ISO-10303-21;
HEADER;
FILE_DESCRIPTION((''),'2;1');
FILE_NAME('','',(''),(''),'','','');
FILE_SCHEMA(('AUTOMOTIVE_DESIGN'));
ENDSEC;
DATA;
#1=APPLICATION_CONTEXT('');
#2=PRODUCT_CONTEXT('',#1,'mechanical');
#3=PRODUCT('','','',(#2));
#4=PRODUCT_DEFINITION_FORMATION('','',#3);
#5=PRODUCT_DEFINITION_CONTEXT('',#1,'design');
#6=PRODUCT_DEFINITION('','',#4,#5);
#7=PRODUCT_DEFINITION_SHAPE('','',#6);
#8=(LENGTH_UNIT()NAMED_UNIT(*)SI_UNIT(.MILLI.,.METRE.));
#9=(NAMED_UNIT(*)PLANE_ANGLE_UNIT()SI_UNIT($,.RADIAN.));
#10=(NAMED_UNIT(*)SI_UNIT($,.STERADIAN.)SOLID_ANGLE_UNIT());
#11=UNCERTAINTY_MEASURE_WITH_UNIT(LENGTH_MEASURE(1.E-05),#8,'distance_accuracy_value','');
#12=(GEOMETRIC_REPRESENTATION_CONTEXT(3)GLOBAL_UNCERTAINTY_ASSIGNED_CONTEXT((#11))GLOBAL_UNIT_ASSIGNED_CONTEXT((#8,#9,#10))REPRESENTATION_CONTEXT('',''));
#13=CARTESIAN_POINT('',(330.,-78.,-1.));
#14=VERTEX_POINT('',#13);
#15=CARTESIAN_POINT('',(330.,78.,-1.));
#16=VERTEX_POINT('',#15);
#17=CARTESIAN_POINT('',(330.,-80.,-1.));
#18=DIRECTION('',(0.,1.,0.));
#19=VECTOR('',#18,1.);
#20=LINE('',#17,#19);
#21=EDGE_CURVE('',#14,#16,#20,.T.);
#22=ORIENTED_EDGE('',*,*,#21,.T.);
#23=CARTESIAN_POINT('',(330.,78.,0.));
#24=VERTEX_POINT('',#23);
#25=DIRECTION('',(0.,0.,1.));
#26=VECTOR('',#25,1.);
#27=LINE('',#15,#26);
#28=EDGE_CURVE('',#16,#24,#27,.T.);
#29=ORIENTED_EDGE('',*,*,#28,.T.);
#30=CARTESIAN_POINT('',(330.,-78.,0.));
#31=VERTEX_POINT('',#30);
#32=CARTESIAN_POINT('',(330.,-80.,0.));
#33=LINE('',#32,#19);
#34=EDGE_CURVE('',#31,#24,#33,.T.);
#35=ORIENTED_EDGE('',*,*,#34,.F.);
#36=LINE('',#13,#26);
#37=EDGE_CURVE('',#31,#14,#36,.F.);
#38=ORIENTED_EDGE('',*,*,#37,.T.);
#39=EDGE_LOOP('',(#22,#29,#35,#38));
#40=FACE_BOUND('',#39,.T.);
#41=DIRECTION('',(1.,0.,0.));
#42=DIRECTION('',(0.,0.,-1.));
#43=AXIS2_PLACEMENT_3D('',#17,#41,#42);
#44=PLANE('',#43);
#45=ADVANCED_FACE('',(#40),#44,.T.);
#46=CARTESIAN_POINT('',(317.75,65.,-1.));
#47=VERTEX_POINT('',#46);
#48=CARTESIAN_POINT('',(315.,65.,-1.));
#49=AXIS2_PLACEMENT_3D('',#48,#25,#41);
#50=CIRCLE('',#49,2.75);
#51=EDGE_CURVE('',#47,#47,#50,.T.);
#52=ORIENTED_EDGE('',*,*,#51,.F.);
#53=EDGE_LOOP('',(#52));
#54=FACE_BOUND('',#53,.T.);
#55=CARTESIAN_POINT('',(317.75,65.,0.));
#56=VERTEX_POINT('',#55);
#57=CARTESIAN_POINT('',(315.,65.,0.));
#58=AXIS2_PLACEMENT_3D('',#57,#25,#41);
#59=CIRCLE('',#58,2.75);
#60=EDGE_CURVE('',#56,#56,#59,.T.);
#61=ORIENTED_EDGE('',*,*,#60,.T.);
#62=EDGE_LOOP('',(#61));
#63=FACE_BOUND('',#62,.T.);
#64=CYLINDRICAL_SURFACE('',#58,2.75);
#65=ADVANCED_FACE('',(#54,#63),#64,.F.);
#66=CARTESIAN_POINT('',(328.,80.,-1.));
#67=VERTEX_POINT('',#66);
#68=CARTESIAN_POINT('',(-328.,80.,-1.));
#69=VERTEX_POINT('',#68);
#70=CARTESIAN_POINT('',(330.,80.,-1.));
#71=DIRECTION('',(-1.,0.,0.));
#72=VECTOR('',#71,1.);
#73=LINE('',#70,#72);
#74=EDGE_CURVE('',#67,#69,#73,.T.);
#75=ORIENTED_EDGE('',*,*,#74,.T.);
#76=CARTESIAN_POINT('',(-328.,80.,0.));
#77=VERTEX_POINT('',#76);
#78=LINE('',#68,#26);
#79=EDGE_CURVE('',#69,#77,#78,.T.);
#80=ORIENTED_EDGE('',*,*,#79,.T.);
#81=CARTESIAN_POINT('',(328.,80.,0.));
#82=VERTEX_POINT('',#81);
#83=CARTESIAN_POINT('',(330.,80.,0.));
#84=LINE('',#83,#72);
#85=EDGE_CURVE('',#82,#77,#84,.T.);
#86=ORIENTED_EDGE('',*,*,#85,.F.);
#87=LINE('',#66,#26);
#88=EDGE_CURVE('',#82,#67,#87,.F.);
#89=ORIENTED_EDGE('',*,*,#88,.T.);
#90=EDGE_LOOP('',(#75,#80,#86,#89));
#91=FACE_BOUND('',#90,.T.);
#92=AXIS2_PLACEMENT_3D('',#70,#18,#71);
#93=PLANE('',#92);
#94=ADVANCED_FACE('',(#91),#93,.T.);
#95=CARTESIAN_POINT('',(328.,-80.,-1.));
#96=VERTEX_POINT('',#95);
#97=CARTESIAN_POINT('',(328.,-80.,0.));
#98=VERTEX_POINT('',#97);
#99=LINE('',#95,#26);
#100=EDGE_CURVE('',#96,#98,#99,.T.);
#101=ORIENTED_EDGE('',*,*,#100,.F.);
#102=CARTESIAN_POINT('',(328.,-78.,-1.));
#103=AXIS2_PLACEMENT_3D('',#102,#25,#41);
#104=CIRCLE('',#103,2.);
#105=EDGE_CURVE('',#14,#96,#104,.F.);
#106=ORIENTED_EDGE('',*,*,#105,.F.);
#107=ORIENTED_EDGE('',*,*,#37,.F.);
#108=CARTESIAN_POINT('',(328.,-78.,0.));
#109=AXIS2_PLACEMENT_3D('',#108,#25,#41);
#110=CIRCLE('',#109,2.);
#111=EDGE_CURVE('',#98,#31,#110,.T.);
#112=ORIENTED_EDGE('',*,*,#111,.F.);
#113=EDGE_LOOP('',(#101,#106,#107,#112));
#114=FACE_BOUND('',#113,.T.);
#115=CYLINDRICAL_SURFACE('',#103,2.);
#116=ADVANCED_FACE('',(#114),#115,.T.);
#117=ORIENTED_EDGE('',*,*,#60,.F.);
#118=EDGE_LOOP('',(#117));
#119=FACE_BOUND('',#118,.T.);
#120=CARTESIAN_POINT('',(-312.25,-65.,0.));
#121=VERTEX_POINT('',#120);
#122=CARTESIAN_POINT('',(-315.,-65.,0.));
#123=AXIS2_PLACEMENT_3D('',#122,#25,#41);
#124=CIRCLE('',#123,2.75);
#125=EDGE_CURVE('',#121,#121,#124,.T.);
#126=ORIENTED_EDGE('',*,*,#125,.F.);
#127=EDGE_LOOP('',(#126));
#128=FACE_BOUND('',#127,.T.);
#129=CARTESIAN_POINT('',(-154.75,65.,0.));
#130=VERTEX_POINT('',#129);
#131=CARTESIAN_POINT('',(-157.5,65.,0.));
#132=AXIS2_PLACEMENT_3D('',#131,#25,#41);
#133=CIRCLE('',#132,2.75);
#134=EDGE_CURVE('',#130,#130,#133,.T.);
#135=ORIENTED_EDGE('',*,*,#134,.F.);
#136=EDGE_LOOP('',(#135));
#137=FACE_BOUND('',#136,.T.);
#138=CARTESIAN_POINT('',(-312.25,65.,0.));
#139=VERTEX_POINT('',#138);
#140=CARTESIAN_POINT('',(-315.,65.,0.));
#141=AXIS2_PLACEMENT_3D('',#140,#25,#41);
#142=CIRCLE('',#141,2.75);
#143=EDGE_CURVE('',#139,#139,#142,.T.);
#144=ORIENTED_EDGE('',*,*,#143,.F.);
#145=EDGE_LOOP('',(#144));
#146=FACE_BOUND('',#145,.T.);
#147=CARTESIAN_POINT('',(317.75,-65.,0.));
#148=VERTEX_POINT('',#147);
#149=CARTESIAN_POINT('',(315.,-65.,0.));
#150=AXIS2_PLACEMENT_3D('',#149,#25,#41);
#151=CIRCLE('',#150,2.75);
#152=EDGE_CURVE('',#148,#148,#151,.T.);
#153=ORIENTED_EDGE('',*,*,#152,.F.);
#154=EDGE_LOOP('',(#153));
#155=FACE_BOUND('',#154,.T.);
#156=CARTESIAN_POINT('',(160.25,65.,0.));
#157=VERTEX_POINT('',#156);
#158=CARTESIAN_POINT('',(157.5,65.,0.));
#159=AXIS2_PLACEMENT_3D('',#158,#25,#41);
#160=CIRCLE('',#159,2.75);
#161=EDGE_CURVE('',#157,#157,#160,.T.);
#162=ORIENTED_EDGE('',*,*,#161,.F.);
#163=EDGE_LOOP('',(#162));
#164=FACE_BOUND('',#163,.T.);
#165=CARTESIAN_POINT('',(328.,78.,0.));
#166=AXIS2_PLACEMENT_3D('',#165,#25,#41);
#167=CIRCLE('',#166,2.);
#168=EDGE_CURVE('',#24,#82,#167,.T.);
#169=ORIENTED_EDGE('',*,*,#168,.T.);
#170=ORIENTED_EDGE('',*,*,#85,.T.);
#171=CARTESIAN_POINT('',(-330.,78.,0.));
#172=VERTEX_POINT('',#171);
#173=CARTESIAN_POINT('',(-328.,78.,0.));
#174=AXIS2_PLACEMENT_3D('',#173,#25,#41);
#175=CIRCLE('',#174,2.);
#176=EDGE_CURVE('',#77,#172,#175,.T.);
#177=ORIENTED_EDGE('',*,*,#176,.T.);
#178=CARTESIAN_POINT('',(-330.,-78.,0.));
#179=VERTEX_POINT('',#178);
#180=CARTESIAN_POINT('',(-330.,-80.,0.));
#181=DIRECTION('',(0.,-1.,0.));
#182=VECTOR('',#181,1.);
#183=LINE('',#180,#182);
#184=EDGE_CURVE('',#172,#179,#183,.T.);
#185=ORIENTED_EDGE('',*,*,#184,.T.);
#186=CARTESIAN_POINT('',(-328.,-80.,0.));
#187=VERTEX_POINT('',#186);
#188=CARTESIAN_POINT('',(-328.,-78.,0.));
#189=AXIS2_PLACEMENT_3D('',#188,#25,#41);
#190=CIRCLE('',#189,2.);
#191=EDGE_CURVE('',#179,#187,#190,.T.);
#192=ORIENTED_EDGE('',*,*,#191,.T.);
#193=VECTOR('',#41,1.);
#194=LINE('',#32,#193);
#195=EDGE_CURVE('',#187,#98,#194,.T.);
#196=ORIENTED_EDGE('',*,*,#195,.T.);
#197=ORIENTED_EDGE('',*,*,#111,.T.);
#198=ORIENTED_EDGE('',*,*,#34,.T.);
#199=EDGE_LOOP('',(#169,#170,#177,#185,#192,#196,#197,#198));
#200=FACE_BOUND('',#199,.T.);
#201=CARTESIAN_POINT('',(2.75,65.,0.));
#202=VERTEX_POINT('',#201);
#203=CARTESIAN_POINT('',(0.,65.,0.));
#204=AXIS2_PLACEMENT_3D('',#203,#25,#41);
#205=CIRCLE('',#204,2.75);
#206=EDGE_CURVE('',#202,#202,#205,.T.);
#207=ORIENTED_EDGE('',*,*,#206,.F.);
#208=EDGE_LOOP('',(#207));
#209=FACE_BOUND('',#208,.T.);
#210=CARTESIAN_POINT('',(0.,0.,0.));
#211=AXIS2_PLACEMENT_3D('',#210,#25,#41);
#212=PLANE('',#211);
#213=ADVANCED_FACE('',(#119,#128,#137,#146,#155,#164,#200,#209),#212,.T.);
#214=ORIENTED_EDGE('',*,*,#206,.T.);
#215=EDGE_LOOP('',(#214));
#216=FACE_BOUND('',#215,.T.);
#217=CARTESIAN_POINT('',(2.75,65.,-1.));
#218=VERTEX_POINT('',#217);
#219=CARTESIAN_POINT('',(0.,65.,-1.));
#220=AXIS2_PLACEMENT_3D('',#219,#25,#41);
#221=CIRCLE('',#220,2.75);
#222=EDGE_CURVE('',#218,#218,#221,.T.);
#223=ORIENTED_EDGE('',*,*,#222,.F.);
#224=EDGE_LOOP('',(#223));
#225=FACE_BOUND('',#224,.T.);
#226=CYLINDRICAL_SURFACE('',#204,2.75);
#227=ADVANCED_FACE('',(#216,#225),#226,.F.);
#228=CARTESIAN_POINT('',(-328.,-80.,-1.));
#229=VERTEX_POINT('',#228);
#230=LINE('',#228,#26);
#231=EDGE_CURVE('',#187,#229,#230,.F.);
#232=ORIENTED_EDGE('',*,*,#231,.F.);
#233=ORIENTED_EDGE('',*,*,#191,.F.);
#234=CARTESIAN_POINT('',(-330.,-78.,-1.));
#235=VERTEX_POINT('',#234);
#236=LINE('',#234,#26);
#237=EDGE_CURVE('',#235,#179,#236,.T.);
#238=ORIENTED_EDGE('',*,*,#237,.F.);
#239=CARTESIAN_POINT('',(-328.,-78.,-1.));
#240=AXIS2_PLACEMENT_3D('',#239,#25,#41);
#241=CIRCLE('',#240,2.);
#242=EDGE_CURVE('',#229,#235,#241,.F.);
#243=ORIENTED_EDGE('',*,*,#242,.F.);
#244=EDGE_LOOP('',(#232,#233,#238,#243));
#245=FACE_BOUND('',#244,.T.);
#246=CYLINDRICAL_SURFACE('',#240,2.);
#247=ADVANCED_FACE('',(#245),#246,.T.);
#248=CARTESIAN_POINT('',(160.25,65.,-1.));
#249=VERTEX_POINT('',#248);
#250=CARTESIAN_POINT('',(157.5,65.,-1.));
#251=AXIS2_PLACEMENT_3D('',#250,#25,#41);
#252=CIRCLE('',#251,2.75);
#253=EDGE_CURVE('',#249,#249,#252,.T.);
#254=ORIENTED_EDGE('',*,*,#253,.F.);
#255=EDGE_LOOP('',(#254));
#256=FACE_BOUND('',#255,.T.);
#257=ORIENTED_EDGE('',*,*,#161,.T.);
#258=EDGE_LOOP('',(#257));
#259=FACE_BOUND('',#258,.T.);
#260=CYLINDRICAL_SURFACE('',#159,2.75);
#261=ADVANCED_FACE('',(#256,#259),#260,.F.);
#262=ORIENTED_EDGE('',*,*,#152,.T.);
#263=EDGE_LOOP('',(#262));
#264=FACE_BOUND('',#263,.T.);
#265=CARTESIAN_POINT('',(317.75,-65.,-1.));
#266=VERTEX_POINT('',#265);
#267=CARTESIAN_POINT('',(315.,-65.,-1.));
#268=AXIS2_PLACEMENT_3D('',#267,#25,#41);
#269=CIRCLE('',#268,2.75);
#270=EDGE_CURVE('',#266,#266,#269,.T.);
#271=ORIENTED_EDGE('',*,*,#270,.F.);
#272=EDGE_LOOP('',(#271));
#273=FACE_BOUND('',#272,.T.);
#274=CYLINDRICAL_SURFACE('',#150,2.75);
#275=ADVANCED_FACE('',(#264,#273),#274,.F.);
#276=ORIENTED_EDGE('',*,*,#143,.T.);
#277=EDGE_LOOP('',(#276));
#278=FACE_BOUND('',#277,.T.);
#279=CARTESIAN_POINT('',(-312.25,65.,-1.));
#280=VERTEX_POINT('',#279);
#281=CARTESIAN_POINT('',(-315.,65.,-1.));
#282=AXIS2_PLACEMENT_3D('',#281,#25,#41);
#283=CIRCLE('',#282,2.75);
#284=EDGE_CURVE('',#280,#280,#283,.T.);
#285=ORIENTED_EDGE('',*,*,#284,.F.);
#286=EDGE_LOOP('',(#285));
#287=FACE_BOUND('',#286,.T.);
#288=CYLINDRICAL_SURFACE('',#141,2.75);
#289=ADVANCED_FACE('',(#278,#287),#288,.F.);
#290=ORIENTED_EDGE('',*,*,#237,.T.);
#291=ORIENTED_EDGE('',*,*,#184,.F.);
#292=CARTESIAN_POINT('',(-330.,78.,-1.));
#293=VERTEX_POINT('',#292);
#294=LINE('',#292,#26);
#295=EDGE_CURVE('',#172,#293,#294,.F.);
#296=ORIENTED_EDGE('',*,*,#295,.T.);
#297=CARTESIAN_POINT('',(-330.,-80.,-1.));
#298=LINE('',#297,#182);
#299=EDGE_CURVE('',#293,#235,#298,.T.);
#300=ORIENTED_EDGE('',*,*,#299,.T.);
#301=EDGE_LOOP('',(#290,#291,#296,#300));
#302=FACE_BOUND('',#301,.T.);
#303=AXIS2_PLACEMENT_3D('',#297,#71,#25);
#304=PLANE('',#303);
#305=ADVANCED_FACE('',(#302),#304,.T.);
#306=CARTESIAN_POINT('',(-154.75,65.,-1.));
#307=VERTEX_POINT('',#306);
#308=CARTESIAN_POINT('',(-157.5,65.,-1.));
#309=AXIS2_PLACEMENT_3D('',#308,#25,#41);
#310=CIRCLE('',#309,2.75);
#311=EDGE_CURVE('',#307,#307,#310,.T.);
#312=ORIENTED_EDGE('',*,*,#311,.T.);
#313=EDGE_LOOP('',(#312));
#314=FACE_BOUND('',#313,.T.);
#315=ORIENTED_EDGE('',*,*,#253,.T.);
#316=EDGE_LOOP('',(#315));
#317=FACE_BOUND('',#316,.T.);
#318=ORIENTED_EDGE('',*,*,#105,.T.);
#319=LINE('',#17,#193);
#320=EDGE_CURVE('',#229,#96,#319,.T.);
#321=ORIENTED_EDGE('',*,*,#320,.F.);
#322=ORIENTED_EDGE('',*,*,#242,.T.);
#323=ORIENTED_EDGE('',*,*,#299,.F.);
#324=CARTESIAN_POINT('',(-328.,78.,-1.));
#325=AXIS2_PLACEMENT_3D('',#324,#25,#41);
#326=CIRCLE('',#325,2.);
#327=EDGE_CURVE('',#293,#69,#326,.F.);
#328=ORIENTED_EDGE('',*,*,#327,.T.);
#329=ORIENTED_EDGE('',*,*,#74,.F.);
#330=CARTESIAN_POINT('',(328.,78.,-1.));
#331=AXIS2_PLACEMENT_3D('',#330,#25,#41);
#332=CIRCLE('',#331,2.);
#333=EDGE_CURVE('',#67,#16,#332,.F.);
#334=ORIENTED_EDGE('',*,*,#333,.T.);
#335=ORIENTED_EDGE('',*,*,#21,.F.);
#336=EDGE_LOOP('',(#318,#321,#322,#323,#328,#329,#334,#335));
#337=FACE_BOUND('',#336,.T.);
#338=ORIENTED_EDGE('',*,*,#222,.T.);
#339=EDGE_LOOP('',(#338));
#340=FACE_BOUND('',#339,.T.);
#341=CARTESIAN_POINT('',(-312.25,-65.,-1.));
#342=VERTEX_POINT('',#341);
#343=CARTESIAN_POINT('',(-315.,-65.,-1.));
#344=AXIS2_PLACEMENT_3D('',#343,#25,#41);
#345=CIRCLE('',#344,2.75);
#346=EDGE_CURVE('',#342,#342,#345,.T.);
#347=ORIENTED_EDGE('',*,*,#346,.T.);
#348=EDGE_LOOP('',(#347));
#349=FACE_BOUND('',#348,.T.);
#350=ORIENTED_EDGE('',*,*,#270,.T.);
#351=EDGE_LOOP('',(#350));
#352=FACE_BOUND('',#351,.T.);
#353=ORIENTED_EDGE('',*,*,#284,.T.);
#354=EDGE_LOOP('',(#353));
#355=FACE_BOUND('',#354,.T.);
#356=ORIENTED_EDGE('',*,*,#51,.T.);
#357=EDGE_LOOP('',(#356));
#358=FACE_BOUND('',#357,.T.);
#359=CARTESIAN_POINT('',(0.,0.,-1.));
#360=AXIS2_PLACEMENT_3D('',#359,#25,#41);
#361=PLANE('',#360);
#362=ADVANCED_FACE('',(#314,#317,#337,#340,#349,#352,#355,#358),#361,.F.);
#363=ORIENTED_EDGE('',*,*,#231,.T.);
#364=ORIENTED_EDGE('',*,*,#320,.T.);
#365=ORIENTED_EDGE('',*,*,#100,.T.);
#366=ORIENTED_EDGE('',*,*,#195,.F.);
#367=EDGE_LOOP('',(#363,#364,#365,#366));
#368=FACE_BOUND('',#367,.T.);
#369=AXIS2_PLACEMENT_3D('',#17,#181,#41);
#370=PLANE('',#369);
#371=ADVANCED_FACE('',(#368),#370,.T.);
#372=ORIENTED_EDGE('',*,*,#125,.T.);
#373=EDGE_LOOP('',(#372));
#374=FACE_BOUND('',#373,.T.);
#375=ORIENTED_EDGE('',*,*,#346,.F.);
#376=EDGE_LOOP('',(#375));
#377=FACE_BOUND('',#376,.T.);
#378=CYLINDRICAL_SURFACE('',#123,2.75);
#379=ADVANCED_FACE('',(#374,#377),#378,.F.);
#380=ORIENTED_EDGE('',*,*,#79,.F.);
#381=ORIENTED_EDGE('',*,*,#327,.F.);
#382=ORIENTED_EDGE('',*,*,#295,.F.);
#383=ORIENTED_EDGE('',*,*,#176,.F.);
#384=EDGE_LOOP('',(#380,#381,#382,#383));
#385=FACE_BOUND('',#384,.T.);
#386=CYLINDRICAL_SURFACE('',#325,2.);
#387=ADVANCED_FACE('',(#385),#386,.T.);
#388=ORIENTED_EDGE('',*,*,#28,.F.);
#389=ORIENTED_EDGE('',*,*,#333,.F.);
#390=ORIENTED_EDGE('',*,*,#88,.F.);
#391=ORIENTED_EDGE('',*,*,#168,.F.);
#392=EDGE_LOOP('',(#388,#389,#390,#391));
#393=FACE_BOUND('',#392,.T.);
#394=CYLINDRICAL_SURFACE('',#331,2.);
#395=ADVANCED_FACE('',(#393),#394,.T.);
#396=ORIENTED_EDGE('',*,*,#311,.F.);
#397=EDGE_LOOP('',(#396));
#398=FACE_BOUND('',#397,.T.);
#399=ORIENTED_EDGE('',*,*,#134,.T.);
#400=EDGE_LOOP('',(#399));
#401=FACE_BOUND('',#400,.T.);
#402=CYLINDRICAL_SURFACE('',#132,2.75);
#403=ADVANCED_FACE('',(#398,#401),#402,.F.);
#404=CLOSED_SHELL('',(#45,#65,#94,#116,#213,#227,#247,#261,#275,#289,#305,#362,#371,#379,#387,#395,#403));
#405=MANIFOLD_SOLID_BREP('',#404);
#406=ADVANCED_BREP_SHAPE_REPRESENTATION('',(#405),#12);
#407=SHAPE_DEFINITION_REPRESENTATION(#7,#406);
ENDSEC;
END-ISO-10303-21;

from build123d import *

# Parameters (mm, degrees)
SKETCH1_W            = 660
SKETCH1_H            = 160
BASE_FLANGE1_DEPTH   = 1
M5_CLEARANCE_HOLE2_D = 5.5
FILLET1_R            = 2


# Sheet-metal steps are written as plain solids
with BuildPart() as part:
    # Sketch1 → Base-Flange1 (new body)
    with BuildSketch(Plane.XY):
        Rectangle(SKETCH1_W, SKETCH1_H)
    extrude(amount=-BASE_FLANGE1_DEPTH)

    # M5 Clearance Hole2 (through all)
    with Locations(Plane.XY):
        with Locations((0, 65), (-315, 65), (-315, -65), (315, -65), (315, 65), (-157.5, 65), (157.5, 65)):
            Hole(M5_CLEARANCE_HOLE2_D / 2)

    # Fillet1
    fillet1_edges = [part.edges().sort_by_distance(p)[0] for p in [
        (-330, 80, -0.5),
        (330, 80, -0.5),
        (330, -80, -0.5),
        (-330, -80, -0.5),
    ]]
    fillet(fillet1_edges, radius=FILLET1_R)


solid = part.part
